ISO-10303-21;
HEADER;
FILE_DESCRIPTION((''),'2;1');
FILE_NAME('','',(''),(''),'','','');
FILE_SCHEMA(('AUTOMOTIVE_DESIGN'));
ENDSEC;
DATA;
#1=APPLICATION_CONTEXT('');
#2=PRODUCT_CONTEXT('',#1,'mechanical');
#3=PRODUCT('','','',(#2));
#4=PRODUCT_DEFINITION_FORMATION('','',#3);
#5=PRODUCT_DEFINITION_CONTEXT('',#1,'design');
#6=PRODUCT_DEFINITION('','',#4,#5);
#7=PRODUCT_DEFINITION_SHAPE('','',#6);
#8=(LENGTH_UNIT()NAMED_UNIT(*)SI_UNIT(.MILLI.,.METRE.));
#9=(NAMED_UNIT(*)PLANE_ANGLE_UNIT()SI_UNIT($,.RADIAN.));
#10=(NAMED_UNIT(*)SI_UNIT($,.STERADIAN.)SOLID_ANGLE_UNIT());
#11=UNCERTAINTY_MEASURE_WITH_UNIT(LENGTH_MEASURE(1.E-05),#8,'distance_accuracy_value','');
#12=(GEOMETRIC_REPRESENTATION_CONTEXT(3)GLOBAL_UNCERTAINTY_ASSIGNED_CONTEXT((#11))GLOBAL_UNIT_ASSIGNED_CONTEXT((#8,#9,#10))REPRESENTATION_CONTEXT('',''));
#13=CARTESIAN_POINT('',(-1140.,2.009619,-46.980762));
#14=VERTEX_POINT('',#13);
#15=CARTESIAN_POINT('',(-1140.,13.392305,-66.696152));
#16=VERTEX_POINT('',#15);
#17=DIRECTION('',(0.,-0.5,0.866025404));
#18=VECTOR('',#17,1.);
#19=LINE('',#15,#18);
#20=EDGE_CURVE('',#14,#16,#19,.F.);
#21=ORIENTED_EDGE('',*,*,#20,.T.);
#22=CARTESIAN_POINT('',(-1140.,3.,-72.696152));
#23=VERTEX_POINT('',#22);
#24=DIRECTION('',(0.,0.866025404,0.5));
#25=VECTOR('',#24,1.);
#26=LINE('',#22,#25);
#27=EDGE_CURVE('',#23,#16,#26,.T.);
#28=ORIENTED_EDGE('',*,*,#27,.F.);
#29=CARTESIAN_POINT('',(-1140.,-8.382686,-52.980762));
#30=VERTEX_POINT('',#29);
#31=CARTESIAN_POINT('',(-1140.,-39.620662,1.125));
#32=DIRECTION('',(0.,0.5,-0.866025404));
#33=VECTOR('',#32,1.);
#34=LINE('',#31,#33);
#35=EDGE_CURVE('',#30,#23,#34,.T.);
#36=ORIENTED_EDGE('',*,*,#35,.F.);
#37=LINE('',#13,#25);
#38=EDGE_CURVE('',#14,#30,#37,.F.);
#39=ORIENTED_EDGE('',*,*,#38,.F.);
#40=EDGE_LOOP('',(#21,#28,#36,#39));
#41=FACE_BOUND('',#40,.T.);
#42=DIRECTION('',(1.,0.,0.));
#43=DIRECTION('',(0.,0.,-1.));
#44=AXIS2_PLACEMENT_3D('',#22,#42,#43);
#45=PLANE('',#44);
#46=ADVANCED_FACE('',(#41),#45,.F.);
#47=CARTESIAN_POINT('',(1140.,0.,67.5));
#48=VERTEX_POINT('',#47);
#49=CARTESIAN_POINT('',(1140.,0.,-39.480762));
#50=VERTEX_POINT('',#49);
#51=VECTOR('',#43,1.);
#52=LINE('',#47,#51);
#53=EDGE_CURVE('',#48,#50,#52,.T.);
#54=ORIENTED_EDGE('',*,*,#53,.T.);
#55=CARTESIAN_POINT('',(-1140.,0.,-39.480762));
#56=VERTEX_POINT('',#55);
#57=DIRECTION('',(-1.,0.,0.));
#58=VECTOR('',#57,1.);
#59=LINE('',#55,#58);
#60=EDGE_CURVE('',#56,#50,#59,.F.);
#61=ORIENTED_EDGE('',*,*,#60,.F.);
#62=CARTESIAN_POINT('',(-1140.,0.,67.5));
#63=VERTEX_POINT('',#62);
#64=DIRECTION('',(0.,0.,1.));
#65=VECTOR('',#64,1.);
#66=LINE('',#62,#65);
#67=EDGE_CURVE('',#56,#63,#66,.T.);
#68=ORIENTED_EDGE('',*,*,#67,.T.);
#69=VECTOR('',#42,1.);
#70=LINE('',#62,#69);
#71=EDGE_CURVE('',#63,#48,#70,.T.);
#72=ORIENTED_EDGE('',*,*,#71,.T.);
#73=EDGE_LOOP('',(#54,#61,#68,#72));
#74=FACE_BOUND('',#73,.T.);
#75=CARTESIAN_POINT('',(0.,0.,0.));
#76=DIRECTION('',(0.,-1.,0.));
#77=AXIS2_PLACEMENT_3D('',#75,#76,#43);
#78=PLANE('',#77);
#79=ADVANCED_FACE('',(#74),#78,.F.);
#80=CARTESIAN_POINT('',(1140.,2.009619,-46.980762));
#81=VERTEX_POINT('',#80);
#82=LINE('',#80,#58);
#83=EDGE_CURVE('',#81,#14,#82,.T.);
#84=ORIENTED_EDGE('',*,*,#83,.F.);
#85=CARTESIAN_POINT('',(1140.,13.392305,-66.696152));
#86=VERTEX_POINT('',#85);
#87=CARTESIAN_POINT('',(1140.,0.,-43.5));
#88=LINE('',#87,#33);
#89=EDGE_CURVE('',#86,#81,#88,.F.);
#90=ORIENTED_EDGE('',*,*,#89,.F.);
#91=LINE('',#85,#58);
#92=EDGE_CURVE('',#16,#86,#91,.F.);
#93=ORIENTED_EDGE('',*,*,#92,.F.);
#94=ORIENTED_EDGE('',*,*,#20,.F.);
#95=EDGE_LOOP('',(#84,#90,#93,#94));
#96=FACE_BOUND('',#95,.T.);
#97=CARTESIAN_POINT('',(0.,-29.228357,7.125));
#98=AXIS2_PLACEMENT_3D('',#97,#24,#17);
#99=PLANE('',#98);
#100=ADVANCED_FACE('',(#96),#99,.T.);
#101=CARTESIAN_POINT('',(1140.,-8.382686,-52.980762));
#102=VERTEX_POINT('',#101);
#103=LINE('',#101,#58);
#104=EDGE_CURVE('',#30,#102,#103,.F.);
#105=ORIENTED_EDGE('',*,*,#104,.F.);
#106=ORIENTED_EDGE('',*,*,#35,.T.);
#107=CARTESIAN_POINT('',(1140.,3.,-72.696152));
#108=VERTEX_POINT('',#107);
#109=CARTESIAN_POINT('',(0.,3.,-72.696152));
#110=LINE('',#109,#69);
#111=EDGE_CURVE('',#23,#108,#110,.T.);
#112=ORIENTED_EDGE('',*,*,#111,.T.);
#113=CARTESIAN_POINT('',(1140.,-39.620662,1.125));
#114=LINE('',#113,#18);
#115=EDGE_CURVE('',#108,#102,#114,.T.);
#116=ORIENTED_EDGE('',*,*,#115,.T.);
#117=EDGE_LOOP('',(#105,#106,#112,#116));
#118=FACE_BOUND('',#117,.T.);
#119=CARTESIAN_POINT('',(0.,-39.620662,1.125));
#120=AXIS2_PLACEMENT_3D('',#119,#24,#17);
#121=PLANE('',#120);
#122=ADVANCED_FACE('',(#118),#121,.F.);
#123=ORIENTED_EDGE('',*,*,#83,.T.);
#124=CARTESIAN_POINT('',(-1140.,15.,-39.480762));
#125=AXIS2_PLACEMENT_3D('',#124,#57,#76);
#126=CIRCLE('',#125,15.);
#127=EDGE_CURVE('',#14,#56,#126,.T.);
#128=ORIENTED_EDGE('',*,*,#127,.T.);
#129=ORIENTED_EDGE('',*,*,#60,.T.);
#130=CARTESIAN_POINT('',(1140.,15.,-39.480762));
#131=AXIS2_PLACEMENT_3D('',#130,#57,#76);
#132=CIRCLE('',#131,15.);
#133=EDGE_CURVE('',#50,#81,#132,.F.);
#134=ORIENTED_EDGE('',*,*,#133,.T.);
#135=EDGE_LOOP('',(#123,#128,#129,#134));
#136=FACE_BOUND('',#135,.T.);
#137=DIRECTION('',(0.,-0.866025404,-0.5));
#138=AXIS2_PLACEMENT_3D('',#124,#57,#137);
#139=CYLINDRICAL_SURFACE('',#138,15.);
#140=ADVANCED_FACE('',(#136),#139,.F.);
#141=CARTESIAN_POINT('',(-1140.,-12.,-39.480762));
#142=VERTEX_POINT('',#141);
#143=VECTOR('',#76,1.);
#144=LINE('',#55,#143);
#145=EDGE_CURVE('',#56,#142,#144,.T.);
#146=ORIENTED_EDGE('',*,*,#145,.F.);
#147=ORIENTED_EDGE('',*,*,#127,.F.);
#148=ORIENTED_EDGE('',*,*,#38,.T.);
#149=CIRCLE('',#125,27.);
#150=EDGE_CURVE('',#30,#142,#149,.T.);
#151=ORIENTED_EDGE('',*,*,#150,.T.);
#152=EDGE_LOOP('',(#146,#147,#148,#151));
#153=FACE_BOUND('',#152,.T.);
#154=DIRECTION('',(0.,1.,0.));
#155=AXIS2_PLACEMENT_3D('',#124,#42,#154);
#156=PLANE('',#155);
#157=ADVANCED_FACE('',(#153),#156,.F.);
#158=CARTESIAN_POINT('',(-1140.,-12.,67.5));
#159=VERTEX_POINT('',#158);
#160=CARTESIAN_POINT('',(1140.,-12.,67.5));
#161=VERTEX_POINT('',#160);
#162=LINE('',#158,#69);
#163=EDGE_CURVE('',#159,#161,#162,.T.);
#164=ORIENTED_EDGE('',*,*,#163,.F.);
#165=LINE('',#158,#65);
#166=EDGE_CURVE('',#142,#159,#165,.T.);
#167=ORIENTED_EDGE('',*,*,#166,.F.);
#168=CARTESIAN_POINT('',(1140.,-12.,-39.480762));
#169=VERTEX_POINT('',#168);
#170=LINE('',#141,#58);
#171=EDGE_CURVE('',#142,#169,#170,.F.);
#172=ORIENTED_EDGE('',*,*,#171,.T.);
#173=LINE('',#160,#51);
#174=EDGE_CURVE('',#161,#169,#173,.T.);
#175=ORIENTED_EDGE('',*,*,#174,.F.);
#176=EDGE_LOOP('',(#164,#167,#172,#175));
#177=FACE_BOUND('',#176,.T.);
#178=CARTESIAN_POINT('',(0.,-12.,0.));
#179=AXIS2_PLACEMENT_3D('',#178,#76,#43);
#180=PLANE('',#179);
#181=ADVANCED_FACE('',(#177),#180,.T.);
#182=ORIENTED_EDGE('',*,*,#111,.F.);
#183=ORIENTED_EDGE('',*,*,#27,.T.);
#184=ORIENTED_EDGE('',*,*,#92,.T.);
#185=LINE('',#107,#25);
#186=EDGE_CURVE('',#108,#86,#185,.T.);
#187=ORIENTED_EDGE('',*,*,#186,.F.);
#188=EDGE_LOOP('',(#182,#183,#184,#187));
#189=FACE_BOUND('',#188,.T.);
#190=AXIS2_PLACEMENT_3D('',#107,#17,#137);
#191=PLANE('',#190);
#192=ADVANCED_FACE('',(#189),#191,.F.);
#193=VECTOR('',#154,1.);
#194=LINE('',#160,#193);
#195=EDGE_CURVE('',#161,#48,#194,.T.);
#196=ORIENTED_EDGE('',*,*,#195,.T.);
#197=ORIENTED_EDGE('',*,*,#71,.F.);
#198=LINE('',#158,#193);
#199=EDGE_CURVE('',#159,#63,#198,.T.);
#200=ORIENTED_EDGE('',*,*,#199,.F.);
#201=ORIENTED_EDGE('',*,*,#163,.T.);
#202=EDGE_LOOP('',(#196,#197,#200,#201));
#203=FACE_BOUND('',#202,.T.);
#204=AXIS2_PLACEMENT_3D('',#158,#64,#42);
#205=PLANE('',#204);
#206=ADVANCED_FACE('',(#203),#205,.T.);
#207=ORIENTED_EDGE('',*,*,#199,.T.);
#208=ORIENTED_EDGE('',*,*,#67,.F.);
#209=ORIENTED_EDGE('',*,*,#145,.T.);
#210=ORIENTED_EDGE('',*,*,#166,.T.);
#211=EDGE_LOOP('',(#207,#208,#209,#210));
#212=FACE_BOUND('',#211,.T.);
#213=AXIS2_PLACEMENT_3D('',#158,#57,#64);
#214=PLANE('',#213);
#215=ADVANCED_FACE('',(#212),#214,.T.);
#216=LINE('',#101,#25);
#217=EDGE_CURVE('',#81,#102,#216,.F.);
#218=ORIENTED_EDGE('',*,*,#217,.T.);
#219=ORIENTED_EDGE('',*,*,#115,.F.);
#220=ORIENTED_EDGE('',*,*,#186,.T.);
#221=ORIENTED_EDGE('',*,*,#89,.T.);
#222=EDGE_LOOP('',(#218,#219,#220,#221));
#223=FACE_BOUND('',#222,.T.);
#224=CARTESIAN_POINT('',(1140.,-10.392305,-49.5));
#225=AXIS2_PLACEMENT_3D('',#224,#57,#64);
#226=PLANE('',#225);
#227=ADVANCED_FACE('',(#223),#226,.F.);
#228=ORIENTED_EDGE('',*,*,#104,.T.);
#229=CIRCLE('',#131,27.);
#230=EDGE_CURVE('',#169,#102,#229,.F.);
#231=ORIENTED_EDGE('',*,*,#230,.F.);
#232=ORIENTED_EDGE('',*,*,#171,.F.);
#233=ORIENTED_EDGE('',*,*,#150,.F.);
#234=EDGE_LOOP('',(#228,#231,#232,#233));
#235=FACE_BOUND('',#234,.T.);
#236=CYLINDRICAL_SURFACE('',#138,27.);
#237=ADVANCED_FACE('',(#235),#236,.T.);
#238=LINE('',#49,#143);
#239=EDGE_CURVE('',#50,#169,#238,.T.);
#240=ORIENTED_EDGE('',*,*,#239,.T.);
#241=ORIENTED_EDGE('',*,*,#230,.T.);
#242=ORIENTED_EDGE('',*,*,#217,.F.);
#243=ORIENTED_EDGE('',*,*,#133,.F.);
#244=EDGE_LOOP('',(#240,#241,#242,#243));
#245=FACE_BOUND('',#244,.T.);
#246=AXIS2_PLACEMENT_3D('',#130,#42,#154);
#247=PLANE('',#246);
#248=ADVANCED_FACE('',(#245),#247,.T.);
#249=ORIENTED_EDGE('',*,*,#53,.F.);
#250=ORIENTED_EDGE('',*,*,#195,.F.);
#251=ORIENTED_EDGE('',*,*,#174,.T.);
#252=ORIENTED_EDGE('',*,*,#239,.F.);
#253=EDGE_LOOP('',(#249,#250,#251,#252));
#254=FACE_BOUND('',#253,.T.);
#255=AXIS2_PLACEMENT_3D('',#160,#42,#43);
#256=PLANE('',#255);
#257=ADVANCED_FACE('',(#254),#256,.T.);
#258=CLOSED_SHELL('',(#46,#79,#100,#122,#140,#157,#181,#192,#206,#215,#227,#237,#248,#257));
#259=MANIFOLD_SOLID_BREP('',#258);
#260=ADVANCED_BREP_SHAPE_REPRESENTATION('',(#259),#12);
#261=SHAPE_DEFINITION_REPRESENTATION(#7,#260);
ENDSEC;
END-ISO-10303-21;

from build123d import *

# Parameters (mm, degrees)
SKETCH1_W            = 2280
SKETCH1_H            = 135
BASE_FLANGE1_DEPTH   = 12
EDGE_FLANGE1_START   = -1140
EDGE_FLANGE1_DEPTH   = 2280
EDGE_FLANGE1_2_DEPTH = 2280


# Read off the part's stored shape, not the designer's step: Edge-Flange1
# Sheet-metal steps are written as plain solids
with BuildPart() as part:
    # Sketch1 → Base-Flange1 (new body)
    with BuildSketch(Plane(origin=(0, 0, 0), x_dir=(1, 0, 0), z_dir=(0, 1, 0))):
        Rectangle(SKETCH1_W, SKETCH1_H)
    extrude(amount=-BASE_FLANGE1_DEPTH)

    # Edge-Flange1 outline → Edge-Flange1 (cut)
    with BuildSketch(Plane.YZ.offset(EDGE_FLANGE1_START)):
        with BuildLine():
            Line((0, -67.5), (-8.382685902, -52.980762114))
            ThreePointArc((-8.382685902, -52.980762114), (-11.07999731, -46.468876332), (-12, -39.480762114))
            Line((-12, -39.480762114), (-12, -67.5))
            Line((-12, -67.5), (0, -67.5))
        make_face()
    extrude(amount=EDGE_FLANGE1_DEPTH, mode=Mode.SUBTRACT)

    # Edge-Flange1 2 outline → Edge-Flange1 2 (add)
    with BuildSketch(Plane.YZ.offset(EDGE_FLANGE1_START)):
        with BuildLine():
            Line((0, -39.480762114), (0, -67.5))
            Line((0, -67.5), (3, -72.696152423))
            Line((3, -72.696152423), (13.392304845, -66.696152423))
            Line((13.392304845, -66.696152423), (2.009618943, -46.980762114))
            ThreePointArc((2.009618943, -46.980762114), (0.511112606, -43.36304779), (0, -39.480762114))
        make_face()
    extrude(amount=EDGE_FLANGE1_2_DEPTH)


solid = part.part
